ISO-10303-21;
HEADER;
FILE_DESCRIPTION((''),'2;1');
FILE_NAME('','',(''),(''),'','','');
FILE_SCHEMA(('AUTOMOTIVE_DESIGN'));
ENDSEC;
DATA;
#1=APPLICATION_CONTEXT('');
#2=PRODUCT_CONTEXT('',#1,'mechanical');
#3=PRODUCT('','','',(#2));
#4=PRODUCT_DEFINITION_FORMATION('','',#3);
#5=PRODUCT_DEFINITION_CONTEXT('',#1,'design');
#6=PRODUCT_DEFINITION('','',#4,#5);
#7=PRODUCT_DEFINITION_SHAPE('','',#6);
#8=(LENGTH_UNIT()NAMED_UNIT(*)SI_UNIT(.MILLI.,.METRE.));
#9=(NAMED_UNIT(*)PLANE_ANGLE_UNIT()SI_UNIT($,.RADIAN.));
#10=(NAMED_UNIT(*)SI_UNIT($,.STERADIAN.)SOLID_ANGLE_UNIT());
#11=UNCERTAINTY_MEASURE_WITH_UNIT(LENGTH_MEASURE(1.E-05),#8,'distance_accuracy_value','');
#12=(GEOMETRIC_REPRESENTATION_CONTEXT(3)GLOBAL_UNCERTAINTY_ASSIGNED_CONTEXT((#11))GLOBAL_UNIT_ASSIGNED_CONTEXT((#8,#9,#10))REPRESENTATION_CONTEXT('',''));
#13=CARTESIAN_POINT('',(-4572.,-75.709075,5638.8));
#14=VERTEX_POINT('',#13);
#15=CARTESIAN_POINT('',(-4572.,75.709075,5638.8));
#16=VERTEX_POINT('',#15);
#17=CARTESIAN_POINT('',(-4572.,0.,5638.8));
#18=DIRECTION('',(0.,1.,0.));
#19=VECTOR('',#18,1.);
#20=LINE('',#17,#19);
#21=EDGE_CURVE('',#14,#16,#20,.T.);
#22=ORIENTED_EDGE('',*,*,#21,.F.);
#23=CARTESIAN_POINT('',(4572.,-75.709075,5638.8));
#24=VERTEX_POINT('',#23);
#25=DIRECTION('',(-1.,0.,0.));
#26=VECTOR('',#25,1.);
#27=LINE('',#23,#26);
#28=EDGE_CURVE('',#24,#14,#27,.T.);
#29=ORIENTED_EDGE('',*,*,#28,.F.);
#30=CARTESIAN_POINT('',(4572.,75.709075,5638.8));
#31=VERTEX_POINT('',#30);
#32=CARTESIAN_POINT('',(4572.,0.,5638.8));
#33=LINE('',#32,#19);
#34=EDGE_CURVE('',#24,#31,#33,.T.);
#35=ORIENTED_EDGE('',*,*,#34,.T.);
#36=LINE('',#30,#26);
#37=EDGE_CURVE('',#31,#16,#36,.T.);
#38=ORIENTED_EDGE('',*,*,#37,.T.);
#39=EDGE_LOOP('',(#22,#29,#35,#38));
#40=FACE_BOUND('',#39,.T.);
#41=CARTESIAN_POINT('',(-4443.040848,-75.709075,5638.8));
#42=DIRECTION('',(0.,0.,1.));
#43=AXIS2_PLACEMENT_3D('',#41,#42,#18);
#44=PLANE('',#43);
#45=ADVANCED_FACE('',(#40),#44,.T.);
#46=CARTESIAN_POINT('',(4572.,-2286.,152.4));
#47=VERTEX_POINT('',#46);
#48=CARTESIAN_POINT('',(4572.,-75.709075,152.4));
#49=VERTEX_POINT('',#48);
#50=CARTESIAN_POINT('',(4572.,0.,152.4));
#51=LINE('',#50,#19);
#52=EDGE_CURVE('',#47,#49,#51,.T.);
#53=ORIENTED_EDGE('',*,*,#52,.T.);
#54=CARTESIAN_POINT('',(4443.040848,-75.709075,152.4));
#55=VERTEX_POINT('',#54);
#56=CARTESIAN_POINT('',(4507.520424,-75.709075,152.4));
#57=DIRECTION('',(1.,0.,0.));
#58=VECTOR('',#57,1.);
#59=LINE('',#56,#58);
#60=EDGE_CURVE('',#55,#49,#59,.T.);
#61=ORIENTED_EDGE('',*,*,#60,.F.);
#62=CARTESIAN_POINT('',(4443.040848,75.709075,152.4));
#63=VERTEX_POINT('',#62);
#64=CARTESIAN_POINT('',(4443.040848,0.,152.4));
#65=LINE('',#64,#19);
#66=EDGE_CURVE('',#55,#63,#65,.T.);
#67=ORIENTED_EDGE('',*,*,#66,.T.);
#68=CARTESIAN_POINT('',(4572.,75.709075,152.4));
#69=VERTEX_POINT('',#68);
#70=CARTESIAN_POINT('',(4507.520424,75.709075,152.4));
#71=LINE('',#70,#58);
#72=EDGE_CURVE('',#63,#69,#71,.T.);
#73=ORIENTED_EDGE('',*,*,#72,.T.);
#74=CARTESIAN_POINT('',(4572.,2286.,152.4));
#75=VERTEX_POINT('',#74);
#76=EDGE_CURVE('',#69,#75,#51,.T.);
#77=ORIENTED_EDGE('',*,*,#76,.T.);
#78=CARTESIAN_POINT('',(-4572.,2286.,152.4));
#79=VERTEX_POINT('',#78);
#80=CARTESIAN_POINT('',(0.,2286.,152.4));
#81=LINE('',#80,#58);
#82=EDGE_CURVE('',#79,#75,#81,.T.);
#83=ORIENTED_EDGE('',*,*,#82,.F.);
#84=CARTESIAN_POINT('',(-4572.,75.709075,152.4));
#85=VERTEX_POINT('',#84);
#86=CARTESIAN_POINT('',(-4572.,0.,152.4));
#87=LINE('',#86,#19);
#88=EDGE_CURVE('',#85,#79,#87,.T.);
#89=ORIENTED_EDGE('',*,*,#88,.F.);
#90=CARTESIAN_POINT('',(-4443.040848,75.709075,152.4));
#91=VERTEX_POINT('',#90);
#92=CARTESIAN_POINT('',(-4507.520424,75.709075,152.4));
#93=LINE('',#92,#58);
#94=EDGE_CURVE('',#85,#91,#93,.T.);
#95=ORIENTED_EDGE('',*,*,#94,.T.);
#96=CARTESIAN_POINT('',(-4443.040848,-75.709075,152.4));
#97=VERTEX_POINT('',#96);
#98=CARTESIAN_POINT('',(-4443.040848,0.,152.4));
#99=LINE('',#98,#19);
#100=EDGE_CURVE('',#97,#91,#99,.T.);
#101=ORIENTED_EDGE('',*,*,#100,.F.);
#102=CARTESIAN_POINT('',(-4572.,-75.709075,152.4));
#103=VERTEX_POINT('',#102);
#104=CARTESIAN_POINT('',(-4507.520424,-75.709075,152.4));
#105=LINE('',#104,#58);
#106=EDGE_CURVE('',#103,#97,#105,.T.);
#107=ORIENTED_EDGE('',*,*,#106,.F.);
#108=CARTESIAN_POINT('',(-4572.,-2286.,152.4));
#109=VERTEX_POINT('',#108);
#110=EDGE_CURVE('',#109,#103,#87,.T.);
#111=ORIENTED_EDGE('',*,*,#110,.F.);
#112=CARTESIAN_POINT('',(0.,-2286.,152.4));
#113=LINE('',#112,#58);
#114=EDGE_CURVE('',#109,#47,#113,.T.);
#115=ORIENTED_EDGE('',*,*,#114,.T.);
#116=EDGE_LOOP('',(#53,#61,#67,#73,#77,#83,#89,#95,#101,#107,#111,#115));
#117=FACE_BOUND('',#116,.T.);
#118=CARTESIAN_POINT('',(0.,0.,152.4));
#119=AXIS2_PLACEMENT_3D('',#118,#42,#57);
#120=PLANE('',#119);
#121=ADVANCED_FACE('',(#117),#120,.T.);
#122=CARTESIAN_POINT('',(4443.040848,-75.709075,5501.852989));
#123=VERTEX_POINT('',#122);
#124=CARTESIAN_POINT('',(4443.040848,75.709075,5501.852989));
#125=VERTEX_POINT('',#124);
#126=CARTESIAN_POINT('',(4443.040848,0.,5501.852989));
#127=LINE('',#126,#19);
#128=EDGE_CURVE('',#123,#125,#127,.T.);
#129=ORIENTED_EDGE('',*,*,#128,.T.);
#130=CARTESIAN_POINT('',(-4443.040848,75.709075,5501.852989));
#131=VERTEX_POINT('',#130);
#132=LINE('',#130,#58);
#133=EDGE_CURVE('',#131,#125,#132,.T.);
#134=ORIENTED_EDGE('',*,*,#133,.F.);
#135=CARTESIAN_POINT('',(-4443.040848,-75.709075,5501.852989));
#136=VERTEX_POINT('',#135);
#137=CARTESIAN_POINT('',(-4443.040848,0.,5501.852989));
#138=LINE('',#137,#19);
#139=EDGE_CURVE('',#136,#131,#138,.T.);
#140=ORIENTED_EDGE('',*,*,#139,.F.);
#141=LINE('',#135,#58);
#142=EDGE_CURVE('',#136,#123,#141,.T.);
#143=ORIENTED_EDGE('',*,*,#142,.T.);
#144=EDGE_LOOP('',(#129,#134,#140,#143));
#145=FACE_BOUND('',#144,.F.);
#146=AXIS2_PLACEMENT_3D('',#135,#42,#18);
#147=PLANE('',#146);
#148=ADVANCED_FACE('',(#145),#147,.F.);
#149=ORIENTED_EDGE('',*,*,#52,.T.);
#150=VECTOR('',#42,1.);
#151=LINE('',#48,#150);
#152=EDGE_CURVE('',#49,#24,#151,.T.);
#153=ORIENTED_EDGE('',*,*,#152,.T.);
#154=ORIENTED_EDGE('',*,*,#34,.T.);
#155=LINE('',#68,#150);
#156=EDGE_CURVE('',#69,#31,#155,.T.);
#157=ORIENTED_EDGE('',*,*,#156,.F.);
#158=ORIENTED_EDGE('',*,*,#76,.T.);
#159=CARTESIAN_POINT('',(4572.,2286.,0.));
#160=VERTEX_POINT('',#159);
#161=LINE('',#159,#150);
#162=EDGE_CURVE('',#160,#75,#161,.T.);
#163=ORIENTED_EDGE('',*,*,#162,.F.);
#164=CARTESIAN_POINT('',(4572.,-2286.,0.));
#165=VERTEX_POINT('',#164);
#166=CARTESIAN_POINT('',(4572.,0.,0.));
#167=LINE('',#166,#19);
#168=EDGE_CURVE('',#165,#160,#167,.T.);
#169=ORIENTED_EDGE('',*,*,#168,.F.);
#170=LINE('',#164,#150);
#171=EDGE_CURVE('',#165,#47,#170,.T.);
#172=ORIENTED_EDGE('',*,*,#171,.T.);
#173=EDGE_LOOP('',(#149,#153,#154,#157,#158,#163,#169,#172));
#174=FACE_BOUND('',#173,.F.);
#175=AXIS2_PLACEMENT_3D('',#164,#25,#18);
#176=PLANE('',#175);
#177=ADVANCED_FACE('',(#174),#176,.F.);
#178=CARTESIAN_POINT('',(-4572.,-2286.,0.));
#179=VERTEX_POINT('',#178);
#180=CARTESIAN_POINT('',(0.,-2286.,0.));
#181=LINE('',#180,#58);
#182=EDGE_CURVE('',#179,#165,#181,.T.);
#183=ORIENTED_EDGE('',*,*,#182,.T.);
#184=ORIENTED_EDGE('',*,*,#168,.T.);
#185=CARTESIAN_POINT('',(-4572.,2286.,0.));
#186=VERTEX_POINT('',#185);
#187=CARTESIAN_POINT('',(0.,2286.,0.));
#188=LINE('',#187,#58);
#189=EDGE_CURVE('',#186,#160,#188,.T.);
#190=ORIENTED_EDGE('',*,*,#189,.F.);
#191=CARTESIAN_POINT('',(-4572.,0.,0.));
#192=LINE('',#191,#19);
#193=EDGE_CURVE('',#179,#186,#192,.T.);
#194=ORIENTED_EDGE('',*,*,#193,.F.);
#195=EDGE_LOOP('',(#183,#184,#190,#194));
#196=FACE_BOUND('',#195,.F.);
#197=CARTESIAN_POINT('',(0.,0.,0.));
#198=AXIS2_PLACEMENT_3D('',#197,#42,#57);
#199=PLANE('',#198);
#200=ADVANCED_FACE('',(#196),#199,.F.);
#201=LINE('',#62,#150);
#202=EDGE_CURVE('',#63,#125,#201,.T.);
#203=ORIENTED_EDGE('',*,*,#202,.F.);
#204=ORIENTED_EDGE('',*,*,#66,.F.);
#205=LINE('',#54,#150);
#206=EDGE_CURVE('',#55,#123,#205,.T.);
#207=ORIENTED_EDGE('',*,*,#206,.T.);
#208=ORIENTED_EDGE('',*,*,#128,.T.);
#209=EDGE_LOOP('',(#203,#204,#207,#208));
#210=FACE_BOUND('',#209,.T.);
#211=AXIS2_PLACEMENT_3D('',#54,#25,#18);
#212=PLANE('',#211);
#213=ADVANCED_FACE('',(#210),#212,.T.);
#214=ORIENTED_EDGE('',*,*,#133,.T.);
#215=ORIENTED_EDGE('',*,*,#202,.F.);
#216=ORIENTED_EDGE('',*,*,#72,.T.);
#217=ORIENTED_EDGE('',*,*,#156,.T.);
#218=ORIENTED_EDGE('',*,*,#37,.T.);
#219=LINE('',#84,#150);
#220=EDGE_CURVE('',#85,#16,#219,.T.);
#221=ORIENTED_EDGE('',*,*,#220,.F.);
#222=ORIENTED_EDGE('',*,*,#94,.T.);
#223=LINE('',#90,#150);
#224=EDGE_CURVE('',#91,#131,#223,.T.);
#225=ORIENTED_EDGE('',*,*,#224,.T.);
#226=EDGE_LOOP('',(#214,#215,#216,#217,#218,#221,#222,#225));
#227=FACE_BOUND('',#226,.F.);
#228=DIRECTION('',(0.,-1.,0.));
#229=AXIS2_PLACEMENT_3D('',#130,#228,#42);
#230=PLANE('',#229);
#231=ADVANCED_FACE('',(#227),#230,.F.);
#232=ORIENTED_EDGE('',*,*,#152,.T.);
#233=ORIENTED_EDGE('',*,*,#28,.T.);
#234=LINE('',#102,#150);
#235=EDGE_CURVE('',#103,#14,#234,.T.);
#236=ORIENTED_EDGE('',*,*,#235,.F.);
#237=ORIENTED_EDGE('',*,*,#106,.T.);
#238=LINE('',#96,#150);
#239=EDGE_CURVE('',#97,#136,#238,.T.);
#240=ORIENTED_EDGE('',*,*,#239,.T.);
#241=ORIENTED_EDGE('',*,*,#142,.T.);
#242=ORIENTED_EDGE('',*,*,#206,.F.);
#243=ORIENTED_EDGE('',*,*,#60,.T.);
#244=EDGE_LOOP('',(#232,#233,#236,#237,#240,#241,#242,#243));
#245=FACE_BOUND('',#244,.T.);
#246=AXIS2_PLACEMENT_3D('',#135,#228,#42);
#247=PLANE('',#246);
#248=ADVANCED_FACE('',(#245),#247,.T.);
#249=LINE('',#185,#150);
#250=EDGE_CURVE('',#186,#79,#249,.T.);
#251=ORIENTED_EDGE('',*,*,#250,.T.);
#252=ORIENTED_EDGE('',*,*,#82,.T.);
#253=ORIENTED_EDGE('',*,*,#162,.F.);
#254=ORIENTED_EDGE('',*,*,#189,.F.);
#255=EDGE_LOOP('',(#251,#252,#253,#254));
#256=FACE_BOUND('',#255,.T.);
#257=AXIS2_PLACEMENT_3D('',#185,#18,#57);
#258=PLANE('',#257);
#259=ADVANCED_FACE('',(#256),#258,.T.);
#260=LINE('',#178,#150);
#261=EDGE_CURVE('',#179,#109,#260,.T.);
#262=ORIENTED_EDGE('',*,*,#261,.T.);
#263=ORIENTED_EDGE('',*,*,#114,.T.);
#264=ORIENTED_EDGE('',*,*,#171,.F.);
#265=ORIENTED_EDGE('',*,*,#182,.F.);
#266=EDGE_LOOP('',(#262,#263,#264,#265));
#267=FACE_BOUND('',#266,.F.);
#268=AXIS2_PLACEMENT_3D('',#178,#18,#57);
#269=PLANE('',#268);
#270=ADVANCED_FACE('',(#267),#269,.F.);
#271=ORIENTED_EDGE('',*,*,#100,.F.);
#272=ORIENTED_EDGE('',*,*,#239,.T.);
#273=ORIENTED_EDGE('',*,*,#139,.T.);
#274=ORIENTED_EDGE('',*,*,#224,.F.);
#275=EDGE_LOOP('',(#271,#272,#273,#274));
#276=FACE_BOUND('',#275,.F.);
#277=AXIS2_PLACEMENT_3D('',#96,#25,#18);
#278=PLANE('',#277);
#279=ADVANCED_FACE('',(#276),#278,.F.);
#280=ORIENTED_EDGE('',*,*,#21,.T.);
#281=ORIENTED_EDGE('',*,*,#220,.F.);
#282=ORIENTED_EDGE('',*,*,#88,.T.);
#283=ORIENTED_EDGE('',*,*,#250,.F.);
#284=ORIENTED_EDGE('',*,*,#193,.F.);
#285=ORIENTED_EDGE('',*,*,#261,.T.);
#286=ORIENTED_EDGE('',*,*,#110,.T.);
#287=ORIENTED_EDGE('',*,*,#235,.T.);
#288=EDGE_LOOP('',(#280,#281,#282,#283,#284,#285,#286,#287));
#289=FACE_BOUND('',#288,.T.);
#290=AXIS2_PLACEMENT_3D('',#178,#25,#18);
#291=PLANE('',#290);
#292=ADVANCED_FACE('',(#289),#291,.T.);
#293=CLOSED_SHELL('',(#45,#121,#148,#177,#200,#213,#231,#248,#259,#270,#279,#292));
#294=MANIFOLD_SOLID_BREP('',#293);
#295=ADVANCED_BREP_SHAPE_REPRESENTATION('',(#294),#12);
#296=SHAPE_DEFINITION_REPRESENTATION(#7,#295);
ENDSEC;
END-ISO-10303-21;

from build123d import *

# Parameters (mm, degrees)
F0_W     = 9144
F0_H     = 4572
F1_DEPTH = 152.4
F2_W     = 128.9591522217
F2_H     = 151.4181494713
F3_DEPTH = 5486.4
F4_W     = 151.4181494713
F4_H     = 136.9470108032
F5_DEPTH = 8886.0816955566


# Not quite as in the source:
# - the program builds the solid bodies; features that only make, move or delete a surface that nothing else refers to are left out


with BuildPart() as f1:
    # F0 (on Top) → F1 (new body)
    with BuildSketch(Plane.XY):
        Rectangle(F0_W, F0_H)
    extrude(amount=F1_DEPTH)

    # F2 (on face) → F3 (join)
    with BuildSketch(Plane.XY.offset(152.4)):
        with Locations((-4507.5204238892, 0)):
            Rectangle(F2_W, F2_H)
        with Locations((4507.5204238892, 0)):
            Rectangle(F2_W, F2_H)
    extrude(amount=F3_DEPTH)

    # F4 (on face) → F5 (join, through all)
    with BuildSketch(Plane.YZ.offset(-4443.0408477783)):
        with Locations((0, 5570.3264945984)):
            Rectangle(F4_W, F4_H)
    extrude(amount=F5_DEPTH)


solid = f1.part
